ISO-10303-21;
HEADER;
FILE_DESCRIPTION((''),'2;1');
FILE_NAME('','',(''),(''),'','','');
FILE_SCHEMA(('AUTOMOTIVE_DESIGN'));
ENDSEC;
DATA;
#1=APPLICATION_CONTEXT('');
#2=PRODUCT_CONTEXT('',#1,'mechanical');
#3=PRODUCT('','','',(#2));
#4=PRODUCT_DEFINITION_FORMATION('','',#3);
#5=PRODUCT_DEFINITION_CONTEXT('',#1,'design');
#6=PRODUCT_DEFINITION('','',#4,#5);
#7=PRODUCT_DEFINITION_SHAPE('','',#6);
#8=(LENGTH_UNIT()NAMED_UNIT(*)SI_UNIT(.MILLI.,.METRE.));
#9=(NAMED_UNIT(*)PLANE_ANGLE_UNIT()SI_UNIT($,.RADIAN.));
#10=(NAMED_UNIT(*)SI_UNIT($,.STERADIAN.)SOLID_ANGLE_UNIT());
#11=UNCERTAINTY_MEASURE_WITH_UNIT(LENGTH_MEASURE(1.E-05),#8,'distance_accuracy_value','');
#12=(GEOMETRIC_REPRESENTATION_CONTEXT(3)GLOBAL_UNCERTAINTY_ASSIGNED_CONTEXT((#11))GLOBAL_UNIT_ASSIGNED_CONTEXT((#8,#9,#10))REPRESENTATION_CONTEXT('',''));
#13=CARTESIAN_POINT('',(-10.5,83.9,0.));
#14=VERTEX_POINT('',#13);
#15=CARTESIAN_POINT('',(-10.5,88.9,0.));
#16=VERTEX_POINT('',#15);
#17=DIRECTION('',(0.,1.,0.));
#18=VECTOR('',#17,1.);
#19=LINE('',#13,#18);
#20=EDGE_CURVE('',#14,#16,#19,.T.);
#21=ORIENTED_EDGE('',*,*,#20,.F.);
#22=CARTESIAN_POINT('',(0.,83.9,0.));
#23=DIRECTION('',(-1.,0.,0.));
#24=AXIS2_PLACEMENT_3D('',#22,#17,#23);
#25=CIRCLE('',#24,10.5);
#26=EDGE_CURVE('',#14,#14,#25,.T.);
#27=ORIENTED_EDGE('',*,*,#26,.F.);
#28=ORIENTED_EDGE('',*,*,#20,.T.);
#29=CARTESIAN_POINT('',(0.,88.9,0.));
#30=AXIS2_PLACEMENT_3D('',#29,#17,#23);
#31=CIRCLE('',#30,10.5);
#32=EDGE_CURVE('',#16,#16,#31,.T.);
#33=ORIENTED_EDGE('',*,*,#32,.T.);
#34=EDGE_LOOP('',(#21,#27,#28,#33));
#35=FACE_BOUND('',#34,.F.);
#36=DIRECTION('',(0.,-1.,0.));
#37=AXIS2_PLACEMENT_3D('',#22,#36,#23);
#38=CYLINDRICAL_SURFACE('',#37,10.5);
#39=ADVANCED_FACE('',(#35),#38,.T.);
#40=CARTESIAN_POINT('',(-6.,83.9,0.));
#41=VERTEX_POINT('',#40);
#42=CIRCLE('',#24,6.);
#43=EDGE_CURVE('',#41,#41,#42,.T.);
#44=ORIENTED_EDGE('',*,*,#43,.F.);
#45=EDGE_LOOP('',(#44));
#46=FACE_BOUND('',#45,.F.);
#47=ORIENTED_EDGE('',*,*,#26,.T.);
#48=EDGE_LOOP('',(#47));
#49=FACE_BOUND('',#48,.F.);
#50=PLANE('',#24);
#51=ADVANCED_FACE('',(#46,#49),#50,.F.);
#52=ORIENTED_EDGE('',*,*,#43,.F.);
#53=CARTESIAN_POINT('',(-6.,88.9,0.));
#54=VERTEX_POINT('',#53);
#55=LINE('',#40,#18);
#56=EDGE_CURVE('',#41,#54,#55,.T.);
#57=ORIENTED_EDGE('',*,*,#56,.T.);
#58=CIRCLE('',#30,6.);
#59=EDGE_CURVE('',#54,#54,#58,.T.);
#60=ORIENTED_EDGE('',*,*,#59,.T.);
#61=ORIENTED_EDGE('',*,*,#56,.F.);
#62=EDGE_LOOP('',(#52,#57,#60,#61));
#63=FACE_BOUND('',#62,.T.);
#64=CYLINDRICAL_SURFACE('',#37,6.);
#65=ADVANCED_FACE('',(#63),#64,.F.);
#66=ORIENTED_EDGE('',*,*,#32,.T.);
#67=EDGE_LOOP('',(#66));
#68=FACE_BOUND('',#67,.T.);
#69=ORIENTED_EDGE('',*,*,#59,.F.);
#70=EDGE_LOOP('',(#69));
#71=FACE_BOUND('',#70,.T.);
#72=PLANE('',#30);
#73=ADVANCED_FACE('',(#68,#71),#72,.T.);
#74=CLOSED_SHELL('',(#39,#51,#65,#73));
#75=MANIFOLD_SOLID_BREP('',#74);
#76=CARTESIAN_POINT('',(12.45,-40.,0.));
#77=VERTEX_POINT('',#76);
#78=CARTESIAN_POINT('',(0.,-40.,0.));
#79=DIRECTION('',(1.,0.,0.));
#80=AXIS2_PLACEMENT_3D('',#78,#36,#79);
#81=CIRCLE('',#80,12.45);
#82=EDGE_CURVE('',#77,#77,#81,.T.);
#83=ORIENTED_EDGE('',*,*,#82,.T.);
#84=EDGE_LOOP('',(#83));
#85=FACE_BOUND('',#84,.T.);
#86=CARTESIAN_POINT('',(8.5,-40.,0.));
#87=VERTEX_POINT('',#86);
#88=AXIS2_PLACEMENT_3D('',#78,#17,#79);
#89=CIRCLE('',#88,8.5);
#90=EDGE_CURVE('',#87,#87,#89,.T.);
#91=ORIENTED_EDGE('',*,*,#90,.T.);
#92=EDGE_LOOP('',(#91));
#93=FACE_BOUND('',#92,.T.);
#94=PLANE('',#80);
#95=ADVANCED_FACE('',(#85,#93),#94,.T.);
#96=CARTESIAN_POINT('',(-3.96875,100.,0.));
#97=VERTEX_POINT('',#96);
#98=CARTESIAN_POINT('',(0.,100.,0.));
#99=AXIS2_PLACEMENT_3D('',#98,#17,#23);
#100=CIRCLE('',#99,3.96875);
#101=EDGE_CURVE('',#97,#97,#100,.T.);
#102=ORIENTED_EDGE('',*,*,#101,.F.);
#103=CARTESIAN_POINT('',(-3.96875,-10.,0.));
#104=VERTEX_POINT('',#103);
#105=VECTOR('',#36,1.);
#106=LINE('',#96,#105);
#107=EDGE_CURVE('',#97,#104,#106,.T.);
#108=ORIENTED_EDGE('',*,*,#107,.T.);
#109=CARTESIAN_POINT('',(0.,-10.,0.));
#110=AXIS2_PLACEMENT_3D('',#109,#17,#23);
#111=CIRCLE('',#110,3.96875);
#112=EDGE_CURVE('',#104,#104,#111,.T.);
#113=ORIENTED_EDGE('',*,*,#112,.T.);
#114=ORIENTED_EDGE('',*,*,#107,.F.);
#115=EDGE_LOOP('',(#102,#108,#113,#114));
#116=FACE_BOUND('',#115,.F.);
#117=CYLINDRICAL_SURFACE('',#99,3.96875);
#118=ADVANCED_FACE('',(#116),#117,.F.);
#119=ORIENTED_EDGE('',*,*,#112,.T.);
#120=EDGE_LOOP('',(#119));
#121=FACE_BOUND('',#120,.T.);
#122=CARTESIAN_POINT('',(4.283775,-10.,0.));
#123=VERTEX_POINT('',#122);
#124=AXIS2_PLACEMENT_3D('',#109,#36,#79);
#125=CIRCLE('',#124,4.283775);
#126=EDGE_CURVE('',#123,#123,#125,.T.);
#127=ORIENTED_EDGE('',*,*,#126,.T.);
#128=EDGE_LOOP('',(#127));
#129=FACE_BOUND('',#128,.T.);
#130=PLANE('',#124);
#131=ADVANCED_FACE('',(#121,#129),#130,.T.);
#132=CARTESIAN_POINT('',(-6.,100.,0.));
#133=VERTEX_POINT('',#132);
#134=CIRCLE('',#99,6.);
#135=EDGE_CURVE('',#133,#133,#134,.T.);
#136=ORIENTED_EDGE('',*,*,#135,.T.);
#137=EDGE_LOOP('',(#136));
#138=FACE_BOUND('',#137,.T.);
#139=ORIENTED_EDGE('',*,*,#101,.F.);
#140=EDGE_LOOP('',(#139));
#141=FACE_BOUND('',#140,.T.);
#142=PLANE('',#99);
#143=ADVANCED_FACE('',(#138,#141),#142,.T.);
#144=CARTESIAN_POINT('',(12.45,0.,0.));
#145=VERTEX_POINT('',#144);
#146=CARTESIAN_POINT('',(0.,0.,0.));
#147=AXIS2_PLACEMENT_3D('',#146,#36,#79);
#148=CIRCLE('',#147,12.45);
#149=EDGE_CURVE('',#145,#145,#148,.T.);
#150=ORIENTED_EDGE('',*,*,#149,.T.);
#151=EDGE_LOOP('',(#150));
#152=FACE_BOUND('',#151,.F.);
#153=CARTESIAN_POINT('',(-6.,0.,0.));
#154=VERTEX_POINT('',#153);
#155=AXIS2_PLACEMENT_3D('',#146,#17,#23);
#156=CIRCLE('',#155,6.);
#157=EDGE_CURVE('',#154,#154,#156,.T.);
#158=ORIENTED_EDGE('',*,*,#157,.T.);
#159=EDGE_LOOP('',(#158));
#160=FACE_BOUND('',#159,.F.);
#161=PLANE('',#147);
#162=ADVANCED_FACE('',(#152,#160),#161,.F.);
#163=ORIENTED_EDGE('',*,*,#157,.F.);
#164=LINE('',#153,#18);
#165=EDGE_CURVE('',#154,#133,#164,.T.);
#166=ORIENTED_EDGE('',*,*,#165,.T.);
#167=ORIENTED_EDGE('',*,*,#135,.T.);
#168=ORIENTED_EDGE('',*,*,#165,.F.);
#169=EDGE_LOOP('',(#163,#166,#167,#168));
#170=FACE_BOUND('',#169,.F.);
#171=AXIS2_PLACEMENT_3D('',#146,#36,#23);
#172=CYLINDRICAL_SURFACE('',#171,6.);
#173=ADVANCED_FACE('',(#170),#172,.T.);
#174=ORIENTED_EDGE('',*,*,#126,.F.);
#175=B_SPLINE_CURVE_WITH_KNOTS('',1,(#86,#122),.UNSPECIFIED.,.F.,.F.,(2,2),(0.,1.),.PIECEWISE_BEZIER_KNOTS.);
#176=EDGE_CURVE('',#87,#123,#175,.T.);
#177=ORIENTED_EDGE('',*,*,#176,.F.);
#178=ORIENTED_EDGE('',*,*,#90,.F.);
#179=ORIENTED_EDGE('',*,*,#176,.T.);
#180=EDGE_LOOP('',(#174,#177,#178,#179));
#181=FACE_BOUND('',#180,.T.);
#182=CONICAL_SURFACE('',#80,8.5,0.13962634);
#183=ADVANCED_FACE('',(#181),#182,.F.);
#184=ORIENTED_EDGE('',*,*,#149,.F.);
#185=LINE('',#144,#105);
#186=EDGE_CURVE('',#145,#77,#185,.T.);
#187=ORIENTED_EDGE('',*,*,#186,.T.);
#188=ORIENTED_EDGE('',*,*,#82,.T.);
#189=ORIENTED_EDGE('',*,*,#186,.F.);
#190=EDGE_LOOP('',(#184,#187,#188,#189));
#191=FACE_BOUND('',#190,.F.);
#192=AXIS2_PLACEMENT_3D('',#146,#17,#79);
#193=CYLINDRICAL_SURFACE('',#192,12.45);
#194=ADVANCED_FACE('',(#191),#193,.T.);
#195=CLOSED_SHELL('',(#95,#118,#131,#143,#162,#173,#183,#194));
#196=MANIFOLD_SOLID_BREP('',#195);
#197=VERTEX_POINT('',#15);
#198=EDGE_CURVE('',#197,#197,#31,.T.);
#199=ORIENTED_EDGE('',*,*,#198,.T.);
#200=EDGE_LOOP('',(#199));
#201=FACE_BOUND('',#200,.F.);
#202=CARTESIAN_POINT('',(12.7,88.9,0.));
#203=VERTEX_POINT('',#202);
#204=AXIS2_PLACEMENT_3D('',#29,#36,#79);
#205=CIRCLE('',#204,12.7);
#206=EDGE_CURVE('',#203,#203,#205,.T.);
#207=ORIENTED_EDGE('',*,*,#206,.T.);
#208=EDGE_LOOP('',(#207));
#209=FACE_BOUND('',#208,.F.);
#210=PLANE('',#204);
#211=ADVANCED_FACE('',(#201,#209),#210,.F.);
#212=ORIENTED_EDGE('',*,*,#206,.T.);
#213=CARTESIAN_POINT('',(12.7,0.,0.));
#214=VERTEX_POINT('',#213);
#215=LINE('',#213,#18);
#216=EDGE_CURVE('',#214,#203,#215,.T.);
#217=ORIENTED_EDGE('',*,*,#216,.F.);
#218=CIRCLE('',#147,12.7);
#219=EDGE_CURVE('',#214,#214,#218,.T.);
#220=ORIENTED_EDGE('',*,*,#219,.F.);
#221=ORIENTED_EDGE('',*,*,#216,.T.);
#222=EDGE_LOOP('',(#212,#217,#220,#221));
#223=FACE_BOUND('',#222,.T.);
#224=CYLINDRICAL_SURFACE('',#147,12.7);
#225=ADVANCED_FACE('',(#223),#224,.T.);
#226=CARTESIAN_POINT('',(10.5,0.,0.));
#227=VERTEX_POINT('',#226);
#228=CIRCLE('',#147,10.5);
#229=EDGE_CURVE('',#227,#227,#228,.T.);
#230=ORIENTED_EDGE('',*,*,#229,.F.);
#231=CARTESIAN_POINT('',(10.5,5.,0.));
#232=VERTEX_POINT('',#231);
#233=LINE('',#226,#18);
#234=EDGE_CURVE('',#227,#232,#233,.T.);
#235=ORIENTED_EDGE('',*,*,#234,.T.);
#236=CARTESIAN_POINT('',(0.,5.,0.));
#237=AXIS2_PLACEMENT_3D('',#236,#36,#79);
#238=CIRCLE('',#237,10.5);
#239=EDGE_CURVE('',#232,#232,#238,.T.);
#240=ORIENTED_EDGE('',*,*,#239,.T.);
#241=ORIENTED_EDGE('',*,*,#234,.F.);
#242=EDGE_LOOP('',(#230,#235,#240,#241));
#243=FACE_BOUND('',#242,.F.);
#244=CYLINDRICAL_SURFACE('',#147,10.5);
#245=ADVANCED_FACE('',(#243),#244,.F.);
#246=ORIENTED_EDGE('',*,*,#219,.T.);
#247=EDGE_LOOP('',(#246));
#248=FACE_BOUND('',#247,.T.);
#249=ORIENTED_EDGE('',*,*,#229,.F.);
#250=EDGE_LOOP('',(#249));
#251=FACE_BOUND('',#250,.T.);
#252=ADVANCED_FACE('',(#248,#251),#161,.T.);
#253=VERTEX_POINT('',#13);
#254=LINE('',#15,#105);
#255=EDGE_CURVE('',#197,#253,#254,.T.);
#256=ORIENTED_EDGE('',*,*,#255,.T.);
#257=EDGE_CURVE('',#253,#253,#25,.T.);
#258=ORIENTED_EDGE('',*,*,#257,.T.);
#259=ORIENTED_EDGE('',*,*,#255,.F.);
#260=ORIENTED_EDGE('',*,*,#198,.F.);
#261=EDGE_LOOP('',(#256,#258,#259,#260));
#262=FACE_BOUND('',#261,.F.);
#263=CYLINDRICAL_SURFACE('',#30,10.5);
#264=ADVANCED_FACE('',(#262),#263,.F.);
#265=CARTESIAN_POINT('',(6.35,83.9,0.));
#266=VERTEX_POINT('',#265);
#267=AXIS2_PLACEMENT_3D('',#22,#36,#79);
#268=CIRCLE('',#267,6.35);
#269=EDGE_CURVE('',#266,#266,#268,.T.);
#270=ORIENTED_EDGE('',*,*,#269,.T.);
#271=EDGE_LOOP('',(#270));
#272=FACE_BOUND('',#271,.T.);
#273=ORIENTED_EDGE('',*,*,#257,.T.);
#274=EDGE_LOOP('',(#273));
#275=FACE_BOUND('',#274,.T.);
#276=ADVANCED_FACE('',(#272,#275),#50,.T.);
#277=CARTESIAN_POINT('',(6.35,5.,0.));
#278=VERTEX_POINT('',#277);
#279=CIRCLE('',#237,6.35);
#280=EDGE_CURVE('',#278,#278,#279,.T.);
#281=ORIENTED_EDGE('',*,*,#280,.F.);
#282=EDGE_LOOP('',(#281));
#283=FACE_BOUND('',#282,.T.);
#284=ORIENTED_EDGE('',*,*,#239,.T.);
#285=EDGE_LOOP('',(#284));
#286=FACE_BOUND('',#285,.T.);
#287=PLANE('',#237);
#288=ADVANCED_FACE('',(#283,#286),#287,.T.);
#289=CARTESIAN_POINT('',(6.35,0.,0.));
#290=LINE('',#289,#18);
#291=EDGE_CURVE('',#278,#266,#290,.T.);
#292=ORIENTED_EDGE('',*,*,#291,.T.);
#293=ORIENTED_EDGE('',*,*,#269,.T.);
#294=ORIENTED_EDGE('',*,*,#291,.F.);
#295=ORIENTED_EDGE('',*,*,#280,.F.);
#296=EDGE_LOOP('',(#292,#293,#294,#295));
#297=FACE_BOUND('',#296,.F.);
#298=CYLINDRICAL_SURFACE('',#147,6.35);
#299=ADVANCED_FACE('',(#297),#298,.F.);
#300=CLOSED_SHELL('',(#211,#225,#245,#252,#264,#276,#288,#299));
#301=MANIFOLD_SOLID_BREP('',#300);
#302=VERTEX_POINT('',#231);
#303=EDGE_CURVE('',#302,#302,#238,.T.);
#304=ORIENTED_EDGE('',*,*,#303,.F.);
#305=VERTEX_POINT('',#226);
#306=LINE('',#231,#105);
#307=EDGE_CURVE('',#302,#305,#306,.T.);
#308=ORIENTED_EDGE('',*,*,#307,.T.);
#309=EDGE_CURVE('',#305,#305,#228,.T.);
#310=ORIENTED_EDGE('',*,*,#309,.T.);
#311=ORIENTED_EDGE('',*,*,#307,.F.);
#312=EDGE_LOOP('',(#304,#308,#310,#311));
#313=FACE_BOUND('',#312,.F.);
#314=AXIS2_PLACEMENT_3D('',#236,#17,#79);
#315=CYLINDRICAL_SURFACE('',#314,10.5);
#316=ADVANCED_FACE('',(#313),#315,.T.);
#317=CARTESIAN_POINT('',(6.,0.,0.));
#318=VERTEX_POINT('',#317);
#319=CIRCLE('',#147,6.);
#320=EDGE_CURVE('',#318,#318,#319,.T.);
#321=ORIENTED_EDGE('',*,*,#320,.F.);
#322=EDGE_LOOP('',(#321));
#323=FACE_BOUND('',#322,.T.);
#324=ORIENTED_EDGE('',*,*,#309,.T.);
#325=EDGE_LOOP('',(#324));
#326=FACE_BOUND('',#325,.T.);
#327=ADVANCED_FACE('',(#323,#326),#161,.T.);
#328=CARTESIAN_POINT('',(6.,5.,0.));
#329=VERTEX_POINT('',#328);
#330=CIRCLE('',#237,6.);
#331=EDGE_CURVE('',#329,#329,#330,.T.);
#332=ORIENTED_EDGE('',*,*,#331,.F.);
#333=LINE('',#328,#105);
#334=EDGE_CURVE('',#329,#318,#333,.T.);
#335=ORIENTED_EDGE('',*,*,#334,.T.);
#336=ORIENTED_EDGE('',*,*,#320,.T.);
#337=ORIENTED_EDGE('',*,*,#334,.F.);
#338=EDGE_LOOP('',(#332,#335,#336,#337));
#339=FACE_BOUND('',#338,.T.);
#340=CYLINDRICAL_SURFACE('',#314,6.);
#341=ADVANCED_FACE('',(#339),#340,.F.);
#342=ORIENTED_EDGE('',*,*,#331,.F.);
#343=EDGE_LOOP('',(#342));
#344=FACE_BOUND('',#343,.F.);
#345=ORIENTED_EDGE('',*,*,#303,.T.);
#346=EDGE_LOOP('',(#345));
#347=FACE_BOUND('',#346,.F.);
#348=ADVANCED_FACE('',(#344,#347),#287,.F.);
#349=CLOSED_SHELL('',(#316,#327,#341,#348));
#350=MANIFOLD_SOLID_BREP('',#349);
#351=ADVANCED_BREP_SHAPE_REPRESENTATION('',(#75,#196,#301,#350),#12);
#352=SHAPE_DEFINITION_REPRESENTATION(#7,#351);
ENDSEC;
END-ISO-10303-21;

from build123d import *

# Parameters (mm, degrees)
F0_R      = 12.7
F0_R_2    = 6.35
F1_DEPTH  = 88.9
F2_R      = 12.45
F3_DEPTH  = 40
F4_R      = 8.5
F5_DEPTH  = 30
F5_TAPER  = 8
F6_R      = 6
F7_DEPTH  = 100
F8_R      = 3.96875
F9_DEPTH  = 140.0010001
F10_R     = 10.5
F11_DEPTH = 5
F12_R     = 10.5
F12_R_2   = 6
F13_DEPTH = 5
F14_R     = 10.5
F15_DEPTH = 5
F16_R     = 10.5
F16_R_2   = 6
F17_DEPTH = 5


with BuildPart() as f1:
    # F0 (on Front) → F1 (new body)
    with BuildSketch(Plane.XZ):
        Circle(F0_R)
        Circle(F0_R_2, mode=Mode.SUBTRACT)
    extrude(amount=-F1_DEPTH)

    # F10 (on face) → F11 (cut)
    with BuildSketch(Plane.XZ):
        Circle(F10_R)
    extrude(amount=-F11_DEPTH, mode=Mode.SUBTRACT)

    # F14 (on face) → F15 (cut)
    with BuildSketch(Plane(origin=(0, 88.9, 0), x_dir=(-1, 0, 0), z_dir=(0, 1, 0))):
        Circle(F14_R)
    extrude(amount=-F15_DEPTH, mode=Mode.SUBTRACT)


with BuildPart() as f3:
    # F2 (on Front) → F3 (new body)
    with BuildSketch(Plane.XZ):
        Circle(F2_R)
    extrude(amount=F3_DEPTH)

    # F4 (on face) → F5 (cut)
    with BuildSketch(Plane.XZ.offset(40)):
        Circle(F4_R)
    extrude(amount=-F5_DEPTH, taper=F5_TAPER, mode=Mode.SUBTRACT)

    # F6 (on face) → F7 (join)
    with BuildSketch(Plane(origin=(0, 0, 0), x_dir=(-1, 0, 0), z_dir=(0, 1, 0))):
        Circle(F6_R)
    extrude(amount=F7_DEPTH)

    # F8 (on face) → F9 (cut, through all)
    with BuildSketch(Plane(origin=(0, 100, 0), x_dir=(-1, 0, 0), z_dir=(0, 1, 0))):
        Circle(F8_R)
    extrude(amount=-F9_DEPTH, mode=Mode.SUBTRACT)


with BuildPart() as f13:
    # F12 (on face) → F13 (new body)
    with BuildSketch(Plane.XZ.offset(-5)):
        Circle(F12_R)
        Circle(F12_R_2, mode=Mode.SUBTRACT)
    extrude(amount=F13_DEPTH)


with BuildPart() as f17:
    # F16 (on face) → F17 (new body)
    with BuildSketch(Plane(origin=(0, 83.9, 0), x_dir=(-1, 0, 0), z_dir=(0, 1, 0))):
        Circle(F16_R)
        Circle(F16_R_2, mode=Mode.SUBTRACT)
    extrude(amount=F17_DEPTH)


solid = Compound([f1.part, f3.part, f13.part, f17.part])
